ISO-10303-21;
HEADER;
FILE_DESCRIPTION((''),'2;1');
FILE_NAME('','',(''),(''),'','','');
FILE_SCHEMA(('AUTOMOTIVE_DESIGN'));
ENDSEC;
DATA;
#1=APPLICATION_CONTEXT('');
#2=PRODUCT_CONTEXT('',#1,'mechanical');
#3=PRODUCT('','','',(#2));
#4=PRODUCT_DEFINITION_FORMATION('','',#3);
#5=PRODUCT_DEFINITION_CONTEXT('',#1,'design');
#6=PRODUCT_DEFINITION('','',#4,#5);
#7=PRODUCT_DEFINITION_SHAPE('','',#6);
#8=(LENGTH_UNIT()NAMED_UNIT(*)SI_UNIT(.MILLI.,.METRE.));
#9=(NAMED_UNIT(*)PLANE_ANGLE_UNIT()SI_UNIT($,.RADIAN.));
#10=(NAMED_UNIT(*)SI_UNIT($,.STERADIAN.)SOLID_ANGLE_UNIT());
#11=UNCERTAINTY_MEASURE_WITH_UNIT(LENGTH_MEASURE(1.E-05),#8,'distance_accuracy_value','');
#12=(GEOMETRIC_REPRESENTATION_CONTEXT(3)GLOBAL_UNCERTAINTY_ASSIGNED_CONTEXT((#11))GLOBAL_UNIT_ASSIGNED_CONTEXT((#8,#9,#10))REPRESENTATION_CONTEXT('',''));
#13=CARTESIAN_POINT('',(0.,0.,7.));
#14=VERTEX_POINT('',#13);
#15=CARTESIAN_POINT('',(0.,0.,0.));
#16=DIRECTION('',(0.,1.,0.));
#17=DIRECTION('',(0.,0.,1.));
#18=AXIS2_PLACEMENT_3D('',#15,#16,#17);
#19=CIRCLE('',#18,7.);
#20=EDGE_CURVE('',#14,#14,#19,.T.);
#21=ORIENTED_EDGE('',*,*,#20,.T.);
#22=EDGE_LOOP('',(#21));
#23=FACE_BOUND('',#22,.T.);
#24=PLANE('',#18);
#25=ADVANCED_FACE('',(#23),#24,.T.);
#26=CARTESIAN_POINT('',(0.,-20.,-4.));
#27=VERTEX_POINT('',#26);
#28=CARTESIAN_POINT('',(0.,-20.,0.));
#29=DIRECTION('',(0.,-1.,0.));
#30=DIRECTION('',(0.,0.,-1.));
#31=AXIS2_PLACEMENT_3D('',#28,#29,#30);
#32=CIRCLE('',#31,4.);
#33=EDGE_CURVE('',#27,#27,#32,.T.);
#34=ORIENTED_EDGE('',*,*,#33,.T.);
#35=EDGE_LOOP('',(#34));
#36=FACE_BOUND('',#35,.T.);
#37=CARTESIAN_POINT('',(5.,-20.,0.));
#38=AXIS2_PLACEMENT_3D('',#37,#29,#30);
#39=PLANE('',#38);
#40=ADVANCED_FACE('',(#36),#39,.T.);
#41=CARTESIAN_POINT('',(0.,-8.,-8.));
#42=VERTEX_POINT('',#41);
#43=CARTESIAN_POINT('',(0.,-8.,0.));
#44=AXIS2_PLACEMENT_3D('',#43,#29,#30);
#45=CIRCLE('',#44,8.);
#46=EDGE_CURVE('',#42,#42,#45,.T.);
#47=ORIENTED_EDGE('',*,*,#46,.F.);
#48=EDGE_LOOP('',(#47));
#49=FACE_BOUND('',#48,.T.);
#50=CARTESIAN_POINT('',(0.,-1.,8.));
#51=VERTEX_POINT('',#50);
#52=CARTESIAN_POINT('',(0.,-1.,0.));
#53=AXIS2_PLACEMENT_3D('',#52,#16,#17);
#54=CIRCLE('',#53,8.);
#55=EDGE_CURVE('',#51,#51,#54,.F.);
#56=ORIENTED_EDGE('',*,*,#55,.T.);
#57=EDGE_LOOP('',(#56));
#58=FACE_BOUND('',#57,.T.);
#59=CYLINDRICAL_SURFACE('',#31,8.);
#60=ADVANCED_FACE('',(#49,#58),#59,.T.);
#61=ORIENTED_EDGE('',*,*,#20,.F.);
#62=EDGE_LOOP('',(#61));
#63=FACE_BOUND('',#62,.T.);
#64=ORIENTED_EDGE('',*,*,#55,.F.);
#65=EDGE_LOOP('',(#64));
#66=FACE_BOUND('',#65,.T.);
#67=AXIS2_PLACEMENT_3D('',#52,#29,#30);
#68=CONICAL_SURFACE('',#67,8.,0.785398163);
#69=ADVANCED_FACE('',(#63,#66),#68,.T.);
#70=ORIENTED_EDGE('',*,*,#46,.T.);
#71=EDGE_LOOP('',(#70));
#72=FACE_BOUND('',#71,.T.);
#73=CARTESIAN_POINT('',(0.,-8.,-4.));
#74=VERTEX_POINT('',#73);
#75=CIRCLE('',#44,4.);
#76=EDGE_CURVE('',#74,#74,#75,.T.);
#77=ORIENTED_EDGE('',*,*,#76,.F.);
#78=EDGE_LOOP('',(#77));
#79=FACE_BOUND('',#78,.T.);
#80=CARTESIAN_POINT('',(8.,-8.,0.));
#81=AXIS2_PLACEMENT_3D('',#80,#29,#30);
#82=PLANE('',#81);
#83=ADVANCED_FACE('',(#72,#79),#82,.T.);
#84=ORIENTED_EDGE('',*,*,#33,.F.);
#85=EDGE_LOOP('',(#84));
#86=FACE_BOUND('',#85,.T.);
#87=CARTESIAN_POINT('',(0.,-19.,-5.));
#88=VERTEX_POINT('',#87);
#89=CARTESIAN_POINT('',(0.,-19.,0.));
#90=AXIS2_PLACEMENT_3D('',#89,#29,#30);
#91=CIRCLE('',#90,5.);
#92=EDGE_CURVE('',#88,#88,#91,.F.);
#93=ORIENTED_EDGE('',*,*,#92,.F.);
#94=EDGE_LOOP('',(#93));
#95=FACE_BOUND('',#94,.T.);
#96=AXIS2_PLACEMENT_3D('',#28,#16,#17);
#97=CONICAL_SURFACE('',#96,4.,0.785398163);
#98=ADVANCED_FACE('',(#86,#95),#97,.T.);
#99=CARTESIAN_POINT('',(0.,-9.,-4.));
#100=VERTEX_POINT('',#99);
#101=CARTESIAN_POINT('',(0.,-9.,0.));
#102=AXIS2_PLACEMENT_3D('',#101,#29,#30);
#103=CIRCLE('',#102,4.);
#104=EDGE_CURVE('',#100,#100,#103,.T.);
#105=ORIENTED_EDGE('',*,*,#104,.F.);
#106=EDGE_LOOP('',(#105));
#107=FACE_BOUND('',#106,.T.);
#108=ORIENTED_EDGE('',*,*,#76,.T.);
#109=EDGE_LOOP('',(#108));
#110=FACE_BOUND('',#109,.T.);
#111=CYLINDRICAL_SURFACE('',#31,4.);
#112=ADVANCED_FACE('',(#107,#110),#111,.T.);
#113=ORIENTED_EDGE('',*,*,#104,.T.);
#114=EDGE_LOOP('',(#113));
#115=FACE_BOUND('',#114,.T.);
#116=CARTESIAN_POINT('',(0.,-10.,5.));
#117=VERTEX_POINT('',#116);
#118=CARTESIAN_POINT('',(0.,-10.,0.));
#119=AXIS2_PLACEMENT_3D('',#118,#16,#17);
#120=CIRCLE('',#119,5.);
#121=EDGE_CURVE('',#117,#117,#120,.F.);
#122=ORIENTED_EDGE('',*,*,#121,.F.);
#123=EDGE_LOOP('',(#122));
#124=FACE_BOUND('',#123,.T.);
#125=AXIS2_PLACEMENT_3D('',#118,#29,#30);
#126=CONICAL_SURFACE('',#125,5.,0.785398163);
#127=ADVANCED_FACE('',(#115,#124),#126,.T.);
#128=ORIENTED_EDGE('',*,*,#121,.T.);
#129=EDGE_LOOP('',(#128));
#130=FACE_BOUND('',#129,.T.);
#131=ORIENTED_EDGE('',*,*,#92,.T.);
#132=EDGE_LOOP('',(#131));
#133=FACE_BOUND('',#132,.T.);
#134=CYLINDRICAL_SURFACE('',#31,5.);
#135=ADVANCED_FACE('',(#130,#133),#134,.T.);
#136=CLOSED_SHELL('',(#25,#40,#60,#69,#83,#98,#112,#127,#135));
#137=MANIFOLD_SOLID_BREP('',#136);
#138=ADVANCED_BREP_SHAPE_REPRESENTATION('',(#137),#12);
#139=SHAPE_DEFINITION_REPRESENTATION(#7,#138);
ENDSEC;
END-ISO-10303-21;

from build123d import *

# Parameters (mm, degrees)
CHAMFER_1_SIZE = 1


with BuildPart() as part:
    # 草图1 → 旋转1 (revolve)
    with BuildSketch(Plane.XY, mode=Mode.PRIVATE) as revolve_1_sk:
        Polygon((0, 0), (8, 0), (8, -8), (4, -8), (4, -9), (5, -9), (5, -20), (0, -20), align=None)
    revolve(revolve_1_sk.sketch.rotate(Axis((0, -20, 0), (0, 1, 0)), 90), axis=Axis((0, -20, 0), (0, 1, 0)))

    # 倒角1
    chamfer_1_edges = [part.edges().sort_by_distance(p)[0] for p in [
        (0, -20, 5),
        (0, -9, 5),
        (0, 0, 8),
    ]]
    chamfer(chamfer_1_edges, length=CHAMFER_1_SIZE - 0.0001)  # a hair under: the kernel refuses the full size


solid = part.part
